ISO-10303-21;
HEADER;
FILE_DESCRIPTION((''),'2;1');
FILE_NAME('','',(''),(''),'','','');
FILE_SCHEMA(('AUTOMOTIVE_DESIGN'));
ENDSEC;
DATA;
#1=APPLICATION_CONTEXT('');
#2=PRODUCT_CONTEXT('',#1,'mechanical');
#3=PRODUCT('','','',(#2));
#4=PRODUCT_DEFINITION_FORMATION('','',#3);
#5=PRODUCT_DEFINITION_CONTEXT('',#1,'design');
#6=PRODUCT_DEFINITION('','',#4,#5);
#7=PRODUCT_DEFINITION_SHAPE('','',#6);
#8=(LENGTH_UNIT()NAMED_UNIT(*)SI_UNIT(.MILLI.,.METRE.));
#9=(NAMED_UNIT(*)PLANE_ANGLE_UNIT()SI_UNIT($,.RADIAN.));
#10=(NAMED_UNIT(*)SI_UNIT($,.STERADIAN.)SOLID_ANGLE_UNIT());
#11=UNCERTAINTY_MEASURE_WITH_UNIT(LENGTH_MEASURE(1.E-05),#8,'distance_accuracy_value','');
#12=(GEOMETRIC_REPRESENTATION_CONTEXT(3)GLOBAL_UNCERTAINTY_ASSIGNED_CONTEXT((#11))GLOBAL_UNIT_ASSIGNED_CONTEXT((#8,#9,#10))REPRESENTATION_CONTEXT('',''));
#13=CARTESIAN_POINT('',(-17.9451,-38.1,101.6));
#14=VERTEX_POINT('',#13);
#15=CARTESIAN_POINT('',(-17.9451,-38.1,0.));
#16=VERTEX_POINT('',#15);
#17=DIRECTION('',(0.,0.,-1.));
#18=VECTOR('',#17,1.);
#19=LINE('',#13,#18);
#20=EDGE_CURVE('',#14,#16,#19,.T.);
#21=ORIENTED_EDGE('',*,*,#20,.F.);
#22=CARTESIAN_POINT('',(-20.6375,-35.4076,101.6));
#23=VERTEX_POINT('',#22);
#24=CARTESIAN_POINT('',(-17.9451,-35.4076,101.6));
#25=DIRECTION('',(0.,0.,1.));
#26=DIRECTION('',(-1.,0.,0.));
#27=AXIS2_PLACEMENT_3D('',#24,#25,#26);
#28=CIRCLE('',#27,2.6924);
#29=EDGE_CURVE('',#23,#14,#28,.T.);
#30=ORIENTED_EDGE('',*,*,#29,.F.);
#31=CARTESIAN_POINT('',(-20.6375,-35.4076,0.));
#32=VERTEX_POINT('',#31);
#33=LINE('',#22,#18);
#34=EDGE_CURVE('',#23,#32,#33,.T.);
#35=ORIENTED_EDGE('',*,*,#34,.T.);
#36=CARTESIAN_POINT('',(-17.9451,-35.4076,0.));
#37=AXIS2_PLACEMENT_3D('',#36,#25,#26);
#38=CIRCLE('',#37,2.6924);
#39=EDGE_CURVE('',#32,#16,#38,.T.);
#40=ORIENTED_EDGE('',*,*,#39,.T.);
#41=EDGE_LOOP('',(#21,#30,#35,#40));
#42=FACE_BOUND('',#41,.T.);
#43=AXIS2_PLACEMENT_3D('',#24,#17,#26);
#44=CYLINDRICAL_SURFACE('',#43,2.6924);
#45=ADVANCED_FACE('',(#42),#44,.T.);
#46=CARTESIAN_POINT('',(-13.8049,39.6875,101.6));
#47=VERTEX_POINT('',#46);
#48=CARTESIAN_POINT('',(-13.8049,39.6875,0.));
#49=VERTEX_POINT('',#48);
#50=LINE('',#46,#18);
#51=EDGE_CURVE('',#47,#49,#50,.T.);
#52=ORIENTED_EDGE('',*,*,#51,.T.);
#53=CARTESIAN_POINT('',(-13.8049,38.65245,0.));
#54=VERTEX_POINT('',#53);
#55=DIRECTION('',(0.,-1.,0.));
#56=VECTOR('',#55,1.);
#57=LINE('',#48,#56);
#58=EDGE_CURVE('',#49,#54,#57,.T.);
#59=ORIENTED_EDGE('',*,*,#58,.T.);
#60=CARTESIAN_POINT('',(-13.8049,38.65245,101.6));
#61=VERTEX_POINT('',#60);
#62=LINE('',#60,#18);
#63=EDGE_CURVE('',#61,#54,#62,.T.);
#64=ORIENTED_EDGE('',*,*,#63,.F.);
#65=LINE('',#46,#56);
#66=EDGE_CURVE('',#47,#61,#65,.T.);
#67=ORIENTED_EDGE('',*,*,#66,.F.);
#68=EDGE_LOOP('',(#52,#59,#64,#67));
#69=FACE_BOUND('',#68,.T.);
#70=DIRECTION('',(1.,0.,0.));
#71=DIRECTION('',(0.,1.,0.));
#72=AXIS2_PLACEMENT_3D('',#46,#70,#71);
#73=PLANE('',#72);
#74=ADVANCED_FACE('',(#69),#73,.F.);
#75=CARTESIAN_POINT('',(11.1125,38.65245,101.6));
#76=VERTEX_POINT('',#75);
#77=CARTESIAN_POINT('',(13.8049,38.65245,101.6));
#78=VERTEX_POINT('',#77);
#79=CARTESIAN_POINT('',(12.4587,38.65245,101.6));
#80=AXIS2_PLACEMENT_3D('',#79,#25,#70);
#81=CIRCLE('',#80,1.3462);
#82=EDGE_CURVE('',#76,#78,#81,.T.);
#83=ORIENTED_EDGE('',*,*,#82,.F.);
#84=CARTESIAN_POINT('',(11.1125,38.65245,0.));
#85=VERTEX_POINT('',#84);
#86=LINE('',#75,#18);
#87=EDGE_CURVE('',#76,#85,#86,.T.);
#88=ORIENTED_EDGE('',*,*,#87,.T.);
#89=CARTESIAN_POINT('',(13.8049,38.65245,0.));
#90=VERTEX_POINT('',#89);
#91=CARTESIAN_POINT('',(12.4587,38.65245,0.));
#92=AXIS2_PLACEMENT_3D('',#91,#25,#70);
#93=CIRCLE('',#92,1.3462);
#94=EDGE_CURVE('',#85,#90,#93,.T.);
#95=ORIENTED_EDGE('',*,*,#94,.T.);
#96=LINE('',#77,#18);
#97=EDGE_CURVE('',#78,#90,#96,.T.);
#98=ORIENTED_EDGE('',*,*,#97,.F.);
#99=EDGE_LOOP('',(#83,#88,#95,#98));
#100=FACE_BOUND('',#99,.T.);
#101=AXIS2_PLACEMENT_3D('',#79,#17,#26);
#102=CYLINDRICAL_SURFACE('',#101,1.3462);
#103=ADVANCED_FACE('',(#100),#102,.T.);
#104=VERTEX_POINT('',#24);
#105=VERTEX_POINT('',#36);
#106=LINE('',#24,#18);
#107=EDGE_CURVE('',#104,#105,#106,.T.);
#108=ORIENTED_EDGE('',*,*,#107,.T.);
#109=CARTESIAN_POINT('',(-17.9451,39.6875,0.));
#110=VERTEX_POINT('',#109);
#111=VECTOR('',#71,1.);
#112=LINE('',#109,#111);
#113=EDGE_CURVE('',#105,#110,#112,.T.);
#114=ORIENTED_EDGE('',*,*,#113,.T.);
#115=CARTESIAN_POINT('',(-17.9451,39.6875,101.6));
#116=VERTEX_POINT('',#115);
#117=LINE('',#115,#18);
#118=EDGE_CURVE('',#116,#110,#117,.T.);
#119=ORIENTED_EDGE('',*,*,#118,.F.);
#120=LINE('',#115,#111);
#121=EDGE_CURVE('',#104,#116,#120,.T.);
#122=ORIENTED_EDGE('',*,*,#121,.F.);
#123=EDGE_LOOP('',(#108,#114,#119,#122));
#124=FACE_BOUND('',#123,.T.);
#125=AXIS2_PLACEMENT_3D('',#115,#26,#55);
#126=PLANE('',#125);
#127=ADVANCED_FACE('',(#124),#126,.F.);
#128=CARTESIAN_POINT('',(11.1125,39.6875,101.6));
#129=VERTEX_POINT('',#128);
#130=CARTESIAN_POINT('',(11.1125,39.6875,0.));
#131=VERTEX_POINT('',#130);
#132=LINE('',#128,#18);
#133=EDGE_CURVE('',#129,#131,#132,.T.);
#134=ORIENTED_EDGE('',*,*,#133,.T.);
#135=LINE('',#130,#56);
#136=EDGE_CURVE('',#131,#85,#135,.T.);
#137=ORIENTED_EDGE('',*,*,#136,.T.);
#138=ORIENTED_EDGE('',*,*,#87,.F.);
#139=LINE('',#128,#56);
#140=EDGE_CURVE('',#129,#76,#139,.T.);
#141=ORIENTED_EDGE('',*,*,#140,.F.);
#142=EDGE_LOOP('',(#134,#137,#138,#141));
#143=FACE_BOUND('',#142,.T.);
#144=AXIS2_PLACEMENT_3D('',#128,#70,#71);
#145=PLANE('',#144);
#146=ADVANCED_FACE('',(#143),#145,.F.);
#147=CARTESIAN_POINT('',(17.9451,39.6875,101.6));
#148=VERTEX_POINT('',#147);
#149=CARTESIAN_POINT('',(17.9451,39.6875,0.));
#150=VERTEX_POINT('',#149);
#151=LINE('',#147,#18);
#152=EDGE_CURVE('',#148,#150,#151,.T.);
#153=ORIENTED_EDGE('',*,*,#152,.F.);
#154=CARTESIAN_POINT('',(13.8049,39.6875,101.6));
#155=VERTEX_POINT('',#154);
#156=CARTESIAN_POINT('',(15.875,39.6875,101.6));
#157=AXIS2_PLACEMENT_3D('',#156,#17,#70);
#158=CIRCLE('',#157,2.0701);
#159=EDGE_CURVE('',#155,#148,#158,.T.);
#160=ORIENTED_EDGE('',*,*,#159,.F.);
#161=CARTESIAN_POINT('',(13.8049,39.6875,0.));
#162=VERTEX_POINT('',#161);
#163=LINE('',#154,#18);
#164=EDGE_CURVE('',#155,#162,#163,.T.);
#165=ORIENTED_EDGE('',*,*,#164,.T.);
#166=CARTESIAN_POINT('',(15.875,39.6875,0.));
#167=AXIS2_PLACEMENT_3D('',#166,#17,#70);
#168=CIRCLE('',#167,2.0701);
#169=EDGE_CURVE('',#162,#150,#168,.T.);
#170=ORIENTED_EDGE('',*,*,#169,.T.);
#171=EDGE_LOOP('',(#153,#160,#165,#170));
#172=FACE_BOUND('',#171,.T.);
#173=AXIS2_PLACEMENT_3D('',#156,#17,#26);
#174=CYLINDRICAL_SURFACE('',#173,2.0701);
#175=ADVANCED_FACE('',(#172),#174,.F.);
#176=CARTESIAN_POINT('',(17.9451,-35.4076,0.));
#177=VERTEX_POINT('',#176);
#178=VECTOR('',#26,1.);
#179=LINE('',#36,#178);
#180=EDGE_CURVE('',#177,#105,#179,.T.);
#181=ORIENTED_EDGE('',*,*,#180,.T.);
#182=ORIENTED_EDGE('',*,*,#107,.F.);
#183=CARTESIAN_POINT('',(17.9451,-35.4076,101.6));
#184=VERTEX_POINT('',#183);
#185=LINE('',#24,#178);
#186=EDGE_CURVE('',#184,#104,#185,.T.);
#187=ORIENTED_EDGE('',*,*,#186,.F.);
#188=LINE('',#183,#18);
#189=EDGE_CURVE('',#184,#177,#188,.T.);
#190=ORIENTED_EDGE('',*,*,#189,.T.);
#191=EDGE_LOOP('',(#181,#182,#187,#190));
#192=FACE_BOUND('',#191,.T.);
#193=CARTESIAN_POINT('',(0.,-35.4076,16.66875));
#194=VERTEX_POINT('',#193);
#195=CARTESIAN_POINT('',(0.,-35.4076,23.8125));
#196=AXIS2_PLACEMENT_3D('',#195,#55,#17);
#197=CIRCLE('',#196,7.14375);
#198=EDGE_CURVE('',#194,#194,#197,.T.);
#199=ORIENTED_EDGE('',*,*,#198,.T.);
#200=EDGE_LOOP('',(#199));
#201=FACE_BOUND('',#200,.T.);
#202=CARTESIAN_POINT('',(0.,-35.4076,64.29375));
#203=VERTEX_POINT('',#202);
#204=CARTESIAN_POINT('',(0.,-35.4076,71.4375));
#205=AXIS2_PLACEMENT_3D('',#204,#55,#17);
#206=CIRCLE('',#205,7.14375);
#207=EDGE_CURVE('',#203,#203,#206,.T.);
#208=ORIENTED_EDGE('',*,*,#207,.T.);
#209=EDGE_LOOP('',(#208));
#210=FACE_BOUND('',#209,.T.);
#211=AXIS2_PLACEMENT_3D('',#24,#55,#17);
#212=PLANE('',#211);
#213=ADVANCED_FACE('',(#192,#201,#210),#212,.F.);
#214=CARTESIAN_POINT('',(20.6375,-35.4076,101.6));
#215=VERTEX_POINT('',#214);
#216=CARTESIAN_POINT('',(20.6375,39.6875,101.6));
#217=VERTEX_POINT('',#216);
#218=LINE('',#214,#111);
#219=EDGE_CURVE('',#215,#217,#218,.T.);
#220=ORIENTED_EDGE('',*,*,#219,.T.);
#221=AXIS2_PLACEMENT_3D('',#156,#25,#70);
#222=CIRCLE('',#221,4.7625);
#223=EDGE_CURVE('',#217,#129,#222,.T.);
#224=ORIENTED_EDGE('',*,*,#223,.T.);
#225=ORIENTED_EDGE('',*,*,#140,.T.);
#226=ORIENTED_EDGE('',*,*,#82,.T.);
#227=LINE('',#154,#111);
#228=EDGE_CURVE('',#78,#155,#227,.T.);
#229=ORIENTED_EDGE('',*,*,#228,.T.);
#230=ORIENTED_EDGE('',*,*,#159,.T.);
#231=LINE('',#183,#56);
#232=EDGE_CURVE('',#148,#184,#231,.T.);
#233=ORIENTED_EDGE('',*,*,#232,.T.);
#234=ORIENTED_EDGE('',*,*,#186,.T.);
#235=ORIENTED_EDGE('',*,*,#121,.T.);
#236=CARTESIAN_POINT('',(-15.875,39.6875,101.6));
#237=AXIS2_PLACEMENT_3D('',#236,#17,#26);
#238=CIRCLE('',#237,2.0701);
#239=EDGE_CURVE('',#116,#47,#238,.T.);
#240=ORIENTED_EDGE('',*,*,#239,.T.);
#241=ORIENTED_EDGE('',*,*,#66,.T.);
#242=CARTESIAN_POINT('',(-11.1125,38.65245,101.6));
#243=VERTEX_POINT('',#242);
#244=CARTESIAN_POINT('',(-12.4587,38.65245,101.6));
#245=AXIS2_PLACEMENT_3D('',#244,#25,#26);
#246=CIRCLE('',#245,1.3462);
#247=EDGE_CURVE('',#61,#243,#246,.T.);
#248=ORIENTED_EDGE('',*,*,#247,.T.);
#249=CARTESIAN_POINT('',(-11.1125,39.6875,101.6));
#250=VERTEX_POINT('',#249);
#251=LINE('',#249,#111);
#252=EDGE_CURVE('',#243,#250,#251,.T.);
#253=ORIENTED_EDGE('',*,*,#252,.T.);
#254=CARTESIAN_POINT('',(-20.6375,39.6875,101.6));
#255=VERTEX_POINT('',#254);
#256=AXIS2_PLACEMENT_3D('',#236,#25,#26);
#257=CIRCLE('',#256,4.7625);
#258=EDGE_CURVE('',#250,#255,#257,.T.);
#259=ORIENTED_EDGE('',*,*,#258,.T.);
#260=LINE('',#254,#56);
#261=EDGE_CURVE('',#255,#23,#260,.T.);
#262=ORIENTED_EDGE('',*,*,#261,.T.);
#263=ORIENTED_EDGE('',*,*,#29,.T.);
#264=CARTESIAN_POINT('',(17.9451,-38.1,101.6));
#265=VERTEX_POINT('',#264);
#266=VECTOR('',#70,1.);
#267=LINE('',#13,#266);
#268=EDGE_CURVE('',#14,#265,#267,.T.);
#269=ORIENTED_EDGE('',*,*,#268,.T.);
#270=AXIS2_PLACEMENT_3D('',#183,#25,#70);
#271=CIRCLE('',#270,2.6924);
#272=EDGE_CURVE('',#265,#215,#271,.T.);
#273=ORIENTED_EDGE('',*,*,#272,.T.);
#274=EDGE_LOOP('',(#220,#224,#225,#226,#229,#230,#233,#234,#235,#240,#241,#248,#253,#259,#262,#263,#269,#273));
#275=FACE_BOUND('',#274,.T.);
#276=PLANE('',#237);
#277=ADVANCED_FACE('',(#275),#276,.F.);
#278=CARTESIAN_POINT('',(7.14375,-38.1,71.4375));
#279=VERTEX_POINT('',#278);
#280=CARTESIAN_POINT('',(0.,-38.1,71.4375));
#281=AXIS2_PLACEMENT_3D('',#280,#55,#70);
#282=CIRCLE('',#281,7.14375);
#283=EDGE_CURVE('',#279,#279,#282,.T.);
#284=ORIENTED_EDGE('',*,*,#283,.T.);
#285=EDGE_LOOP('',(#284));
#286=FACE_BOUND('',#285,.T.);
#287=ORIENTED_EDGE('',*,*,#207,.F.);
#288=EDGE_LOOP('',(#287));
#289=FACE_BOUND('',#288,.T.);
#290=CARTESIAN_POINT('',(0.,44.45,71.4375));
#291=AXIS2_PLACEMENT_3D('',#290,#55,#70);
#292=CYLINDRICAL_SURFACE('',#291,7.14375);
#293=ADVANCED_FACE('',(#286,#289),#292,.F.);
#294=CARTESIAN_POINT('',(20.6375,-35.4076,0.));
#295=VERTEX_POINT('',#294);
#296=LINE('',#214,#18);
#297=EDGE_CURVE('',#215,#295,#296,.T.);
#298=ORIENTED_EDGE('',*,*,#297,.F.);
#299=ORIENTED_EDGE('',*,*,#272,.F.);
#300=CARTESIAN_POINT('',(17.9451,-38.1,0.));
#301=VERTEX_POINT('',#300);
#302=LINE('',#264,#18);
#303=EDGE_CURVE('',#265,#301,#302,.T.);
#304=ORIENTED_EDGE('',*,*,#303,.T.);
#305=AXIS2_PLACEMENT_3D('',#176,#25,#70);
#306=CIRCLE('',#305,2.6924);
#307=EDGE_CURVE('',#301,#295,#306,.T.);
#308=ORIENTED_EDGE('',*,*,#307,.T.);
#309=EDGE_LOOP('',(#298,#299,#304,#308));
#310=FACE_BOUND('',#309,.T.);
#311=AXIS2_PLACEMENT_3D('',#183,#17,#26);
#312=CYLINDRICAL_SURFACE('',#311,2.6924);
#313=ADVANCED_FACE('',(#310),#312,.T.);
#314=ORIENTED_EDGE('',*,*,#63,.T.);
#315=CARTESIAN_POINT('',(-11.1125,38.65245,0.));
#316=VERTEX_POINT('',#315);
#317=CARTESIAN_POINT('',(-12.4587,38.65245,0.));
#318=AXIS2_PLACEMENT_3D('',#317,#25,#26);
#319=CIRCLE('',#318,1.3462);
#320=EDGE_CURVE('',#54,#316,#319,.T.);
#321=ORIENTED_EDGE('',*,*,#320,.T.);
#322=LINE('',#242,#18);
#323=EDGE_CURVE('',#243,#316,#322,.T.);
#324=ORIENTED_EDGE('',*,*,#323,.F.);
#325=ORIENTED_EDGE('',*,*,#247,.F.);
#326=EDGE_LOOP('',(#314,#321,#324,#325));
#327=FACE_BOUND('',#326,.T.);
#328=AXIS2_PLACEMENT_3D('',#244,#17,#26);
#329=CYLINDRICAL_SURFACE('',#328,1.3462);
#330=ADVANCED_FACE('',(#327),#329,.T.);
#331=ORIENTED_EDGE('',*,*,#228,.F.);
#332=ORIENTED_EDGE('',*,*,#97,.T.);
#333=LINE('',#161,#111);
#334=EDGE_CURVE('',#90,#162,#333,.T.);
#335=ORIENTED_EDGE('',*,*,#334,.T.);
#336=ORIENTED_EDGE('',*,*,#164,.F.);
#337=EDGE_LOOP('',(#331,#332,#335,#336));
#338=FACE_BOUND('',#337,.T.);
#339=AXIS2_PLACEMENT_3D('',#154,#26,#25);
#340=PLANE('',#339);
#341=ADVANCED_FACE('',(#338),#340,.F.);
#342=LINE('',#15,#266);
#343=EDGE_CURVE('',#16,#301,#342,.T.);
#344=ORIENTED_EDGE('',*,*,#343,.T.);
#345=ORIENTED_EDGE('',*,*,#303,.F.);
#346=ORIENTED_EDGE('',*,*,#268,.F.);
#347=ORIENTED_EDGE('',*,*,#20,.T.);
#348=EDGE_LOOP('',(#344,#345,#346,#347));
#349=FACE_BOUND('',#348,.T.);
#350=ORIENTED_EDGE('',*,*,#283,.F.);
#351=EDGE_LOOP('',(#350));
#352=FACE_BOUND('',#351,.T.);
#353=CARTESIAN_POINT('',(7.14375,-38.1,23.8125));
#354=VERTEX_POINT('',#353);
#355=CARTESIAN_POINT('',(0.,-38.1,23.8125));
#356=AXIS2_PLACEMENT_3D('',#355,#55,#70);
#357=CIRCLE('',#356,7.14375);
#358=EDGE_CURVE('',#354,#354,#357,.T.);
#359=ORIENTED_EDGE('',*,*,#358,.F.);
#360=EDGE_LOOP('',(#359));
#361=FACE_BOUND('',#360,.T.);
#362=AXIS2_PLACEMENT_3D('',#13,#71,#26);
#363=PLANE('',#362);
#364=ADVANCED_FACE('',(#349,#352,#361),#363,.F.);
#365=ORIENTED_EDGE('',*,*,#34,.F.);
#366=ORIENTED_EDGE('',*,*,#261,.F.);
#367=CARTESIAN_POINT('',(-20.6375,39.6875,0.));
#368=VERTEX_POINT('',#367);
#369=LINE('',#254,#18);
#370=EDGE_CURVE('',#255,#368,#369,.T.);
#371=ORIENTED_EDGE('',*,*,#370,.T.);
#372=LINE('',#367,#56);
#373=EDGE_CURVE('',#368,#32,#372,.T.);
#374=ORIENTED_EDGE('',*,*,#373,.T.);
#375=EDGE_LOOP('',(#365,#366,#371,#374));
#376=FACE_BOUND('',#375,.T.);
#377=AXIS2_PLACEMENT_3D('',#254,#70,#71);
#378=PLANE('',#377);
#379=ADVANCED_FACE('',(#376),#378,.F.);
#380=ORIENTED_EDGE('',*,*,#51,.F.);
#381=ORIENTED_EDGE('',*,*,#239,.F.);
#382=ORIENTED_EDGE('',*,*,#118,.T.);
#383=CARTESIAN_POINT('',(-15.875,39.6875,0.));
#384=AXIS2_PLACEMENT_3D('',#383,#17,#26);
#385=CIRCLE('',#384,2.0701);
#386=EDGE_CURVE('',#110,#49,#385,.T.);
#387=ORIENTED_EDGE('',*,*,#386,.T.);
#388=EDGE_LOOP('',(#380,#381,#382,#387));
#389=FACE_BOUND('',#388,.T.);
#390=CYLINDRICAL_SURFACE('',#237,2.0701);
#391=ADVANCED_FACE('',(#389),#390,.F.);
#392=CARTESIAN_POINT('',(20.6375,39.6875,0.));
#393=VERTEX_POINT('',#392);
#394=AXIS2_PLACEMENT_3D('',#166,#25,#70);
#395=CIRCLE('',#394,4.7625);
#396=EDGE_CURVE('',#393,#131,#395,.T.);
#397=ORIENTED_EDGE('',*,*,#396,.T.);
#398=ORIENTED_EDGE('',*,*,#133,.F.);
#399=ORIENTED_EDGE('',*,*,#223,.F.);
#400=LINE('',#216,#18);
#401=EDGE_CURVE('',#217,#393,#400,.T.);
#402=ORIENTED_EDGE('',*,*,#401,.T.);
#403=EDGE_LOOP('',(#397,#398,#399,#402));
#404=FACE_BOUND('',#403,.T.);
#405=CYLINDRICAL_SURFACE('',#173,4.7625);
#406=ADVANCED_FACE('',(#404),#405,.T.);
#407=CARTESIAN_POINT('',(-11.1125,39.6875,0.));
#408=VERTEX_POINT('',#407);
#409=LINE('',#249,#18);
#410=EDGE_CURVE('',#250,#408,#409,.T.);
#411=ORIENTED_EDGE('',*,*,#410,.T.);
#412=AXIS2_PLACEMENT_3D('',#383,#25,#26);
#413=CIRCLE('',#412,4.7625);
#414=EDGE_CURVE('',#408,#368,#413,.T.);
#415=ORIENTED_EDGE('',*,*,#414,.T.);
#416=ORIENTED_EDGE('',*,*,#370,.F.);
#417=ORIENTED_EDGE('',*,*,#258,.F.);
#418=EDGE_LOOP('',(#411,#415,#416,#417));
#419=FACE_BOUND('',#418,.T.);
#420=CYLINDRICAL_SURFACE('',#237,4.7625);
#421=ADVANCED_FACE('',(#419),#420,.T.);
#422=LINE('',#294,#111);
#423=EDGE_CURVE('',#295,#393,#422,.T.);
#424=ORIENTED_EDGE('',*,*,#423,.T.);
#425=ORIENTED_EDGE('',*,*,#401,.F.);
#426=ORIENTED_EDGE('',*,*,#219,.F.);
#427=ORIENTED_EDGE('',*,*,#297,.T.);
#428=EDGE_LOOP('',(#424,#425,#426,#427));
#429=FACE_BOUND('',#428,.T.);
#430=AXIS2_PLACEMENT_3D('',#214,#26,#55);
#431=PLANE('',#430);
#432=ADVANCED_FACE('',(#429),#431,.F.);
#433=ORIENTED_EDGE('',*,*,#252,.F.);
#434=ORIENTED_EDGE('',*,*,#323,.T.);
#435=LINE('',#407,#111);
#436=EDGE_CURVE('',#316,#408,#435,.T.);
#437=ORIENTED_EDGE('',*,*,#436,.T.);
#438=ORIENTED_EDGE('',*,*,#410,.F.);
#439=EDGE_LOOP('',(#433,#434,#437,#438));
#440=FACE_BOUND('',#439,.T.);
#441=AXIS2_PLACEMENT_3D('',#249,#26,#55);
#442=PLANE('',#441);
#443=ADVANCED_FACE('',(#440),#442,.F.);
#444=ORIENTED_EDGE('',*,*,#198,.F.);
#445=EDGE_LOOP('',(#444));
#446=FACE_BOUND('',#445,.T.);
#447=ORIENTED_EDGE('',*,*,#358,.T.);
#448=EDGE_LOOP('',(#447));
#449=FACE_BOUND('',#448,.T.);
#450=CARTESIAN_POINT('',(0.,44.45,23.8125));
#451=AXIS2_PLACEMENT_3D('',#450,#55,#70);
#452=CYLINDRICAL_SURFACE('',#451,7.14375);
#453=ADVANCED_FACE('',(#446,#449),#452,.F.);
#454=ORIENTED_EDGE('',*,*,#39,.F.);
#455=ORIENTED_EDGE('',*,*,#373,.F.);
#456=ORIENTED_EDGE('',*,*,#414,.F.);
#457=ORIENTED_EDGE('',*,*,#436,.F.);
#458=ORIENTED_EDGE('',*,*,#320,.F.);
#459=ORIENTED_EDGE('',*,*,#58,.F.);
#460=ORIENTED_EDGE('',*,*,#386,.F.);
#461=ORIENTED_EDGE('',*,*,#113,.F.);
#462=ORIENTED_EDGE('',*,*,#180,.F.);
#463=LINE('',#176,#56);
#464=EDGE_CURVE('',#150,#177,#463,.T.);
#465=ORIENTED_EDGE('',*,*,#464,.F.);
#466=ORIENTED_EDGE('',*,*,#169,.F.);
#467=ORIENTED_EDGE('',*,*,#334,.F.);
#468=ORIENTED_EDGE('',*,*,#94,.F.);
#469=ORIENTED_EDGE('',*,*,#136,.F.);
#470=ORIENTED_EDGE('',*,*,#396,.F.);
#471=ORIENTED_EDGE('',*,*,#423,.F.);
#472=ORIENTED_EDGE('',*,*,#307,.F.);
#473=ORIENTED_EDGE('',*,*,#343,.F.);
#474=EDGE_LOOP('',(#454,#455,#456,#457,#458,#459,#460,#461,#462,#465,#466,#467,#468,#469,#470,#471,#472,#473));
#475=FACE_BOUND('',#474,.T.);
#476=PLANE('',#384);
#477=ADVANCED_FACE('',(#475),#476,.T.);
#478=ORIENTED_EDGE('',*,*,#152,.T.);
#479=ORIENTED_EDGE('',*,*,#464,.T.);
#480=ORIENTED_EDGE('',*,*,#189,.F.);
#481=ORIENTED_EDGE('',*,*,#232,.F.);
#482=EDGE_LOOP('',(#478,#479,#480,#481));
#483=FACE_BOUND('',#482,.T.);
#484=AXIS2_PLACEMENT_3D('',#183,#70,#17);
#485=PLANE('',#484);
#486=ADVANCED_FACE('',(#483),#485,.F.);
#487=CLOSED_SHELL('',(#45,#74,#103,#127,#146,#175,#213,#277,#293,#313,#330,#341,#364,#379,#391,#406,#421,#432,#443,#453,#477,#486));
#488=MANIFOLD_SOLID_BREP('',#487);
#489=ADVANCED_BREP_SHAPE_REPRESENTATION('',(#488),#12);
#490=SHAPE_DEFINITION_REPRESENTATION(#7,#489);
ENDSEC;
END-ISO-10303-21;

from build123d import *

# Parameters (mm, degrees)
BASE_EXTRUDE_DEPTH = 101.6
HOLE1_START        = -38.1
HOLE1_OUTLINE_R    = 7.14375
HOLE1_DEPTH        = 2.6924
LPATTERN2_COUNT    = 2
LPATTERN2_PITCH    = 47.625


# Read off the part's stored shape, not the designer's step: Hole1
with BuildPart() as part:
    # Sketch1 → Base-Extrude (new body)
    with BuildSketch(Plane.XY):
        with BuildLine():
            Line((-20.6375, 39.6875), (-20.6375, -35.4076))
            ThreePointArc((-20.6375, -35.4076), (-19.848914298, -37.311414298), (-17.9451, -38.1))
            Line((-17.9451, -38.1), (17.9451, -38.1))
            ThreePointArc((17.9451, -38.1), (19.848914298, -37.311414298), (20.6375, -35.4076))
            Line((20.6375, -35.4076), (20.6375, 39.6875))
            ThreePointArc((20.6375, 39.6875), (15.875, 44.45), (11.1125, 39.6875))
            Line((11.1125, 39.6875), (11.1125, 38.65245))
            ThreePointArc((11.1125, 38.65245), (12.4587, 37.30625), (13.8049, 38.65245))
            Line((13.8049, 38.65245), (13.8049, 39.6875))
            ThreePointArc((13.8049, 39.6875), (15.875, 41.7576), (17.9451, 39.6875))
            Line((17.9451, 39.6875), (17.9451, -35.4076))
            Line((17.9451, -35.4076), (-17.9451, -35.4076))
            Line((-17.9451, -35.4076), (-17.9451, 39.6875))
            ThreePointArc((-17.9451, 39.6875), (-15.875, 41.7576), (-13.8049, 39.6875))
            Line((-13.8049, 39.6875), (-13.8049, 38.65245))
            ThreePointArc((-13.8049, 38.65245), (-12.4587, 37.30625), (-11.1125, 38.65245))
            Line((-11.1125, 38.65245), (-11.1125, 39.6875))
            ThreePointArc((-11.1125, 39.6875), (-15.875, 44.45), (-20.6375, 39.6875))
        make_face()
    extrude(amount=BASE_EXTRUDE_DEPTH)

    # Hole1 outline → Hole1 (cut)
    with BuildSketch(Plane(origin=(0, 0, 0), x_dir=(1, 0, 0), z_dir=(0, 1, 0)).offset(HOLE1_START)):
        with Locations((0, -23.8125)):
            Circle(HOLE1_OUTLINE_R)
    hole1 = extrude(amount=HOLE1_DEPTH, mode=Mode.SUBTRACT)

    # LPattern2: Hole1 ×2
    with Locations(*[(0, 0, i * LPATTERN2_PITCH) for i in range(1, LPATTERN2_COUNT)]):
        add(hole1, mode=Mode.SUBTRACT)


solid = part.part
